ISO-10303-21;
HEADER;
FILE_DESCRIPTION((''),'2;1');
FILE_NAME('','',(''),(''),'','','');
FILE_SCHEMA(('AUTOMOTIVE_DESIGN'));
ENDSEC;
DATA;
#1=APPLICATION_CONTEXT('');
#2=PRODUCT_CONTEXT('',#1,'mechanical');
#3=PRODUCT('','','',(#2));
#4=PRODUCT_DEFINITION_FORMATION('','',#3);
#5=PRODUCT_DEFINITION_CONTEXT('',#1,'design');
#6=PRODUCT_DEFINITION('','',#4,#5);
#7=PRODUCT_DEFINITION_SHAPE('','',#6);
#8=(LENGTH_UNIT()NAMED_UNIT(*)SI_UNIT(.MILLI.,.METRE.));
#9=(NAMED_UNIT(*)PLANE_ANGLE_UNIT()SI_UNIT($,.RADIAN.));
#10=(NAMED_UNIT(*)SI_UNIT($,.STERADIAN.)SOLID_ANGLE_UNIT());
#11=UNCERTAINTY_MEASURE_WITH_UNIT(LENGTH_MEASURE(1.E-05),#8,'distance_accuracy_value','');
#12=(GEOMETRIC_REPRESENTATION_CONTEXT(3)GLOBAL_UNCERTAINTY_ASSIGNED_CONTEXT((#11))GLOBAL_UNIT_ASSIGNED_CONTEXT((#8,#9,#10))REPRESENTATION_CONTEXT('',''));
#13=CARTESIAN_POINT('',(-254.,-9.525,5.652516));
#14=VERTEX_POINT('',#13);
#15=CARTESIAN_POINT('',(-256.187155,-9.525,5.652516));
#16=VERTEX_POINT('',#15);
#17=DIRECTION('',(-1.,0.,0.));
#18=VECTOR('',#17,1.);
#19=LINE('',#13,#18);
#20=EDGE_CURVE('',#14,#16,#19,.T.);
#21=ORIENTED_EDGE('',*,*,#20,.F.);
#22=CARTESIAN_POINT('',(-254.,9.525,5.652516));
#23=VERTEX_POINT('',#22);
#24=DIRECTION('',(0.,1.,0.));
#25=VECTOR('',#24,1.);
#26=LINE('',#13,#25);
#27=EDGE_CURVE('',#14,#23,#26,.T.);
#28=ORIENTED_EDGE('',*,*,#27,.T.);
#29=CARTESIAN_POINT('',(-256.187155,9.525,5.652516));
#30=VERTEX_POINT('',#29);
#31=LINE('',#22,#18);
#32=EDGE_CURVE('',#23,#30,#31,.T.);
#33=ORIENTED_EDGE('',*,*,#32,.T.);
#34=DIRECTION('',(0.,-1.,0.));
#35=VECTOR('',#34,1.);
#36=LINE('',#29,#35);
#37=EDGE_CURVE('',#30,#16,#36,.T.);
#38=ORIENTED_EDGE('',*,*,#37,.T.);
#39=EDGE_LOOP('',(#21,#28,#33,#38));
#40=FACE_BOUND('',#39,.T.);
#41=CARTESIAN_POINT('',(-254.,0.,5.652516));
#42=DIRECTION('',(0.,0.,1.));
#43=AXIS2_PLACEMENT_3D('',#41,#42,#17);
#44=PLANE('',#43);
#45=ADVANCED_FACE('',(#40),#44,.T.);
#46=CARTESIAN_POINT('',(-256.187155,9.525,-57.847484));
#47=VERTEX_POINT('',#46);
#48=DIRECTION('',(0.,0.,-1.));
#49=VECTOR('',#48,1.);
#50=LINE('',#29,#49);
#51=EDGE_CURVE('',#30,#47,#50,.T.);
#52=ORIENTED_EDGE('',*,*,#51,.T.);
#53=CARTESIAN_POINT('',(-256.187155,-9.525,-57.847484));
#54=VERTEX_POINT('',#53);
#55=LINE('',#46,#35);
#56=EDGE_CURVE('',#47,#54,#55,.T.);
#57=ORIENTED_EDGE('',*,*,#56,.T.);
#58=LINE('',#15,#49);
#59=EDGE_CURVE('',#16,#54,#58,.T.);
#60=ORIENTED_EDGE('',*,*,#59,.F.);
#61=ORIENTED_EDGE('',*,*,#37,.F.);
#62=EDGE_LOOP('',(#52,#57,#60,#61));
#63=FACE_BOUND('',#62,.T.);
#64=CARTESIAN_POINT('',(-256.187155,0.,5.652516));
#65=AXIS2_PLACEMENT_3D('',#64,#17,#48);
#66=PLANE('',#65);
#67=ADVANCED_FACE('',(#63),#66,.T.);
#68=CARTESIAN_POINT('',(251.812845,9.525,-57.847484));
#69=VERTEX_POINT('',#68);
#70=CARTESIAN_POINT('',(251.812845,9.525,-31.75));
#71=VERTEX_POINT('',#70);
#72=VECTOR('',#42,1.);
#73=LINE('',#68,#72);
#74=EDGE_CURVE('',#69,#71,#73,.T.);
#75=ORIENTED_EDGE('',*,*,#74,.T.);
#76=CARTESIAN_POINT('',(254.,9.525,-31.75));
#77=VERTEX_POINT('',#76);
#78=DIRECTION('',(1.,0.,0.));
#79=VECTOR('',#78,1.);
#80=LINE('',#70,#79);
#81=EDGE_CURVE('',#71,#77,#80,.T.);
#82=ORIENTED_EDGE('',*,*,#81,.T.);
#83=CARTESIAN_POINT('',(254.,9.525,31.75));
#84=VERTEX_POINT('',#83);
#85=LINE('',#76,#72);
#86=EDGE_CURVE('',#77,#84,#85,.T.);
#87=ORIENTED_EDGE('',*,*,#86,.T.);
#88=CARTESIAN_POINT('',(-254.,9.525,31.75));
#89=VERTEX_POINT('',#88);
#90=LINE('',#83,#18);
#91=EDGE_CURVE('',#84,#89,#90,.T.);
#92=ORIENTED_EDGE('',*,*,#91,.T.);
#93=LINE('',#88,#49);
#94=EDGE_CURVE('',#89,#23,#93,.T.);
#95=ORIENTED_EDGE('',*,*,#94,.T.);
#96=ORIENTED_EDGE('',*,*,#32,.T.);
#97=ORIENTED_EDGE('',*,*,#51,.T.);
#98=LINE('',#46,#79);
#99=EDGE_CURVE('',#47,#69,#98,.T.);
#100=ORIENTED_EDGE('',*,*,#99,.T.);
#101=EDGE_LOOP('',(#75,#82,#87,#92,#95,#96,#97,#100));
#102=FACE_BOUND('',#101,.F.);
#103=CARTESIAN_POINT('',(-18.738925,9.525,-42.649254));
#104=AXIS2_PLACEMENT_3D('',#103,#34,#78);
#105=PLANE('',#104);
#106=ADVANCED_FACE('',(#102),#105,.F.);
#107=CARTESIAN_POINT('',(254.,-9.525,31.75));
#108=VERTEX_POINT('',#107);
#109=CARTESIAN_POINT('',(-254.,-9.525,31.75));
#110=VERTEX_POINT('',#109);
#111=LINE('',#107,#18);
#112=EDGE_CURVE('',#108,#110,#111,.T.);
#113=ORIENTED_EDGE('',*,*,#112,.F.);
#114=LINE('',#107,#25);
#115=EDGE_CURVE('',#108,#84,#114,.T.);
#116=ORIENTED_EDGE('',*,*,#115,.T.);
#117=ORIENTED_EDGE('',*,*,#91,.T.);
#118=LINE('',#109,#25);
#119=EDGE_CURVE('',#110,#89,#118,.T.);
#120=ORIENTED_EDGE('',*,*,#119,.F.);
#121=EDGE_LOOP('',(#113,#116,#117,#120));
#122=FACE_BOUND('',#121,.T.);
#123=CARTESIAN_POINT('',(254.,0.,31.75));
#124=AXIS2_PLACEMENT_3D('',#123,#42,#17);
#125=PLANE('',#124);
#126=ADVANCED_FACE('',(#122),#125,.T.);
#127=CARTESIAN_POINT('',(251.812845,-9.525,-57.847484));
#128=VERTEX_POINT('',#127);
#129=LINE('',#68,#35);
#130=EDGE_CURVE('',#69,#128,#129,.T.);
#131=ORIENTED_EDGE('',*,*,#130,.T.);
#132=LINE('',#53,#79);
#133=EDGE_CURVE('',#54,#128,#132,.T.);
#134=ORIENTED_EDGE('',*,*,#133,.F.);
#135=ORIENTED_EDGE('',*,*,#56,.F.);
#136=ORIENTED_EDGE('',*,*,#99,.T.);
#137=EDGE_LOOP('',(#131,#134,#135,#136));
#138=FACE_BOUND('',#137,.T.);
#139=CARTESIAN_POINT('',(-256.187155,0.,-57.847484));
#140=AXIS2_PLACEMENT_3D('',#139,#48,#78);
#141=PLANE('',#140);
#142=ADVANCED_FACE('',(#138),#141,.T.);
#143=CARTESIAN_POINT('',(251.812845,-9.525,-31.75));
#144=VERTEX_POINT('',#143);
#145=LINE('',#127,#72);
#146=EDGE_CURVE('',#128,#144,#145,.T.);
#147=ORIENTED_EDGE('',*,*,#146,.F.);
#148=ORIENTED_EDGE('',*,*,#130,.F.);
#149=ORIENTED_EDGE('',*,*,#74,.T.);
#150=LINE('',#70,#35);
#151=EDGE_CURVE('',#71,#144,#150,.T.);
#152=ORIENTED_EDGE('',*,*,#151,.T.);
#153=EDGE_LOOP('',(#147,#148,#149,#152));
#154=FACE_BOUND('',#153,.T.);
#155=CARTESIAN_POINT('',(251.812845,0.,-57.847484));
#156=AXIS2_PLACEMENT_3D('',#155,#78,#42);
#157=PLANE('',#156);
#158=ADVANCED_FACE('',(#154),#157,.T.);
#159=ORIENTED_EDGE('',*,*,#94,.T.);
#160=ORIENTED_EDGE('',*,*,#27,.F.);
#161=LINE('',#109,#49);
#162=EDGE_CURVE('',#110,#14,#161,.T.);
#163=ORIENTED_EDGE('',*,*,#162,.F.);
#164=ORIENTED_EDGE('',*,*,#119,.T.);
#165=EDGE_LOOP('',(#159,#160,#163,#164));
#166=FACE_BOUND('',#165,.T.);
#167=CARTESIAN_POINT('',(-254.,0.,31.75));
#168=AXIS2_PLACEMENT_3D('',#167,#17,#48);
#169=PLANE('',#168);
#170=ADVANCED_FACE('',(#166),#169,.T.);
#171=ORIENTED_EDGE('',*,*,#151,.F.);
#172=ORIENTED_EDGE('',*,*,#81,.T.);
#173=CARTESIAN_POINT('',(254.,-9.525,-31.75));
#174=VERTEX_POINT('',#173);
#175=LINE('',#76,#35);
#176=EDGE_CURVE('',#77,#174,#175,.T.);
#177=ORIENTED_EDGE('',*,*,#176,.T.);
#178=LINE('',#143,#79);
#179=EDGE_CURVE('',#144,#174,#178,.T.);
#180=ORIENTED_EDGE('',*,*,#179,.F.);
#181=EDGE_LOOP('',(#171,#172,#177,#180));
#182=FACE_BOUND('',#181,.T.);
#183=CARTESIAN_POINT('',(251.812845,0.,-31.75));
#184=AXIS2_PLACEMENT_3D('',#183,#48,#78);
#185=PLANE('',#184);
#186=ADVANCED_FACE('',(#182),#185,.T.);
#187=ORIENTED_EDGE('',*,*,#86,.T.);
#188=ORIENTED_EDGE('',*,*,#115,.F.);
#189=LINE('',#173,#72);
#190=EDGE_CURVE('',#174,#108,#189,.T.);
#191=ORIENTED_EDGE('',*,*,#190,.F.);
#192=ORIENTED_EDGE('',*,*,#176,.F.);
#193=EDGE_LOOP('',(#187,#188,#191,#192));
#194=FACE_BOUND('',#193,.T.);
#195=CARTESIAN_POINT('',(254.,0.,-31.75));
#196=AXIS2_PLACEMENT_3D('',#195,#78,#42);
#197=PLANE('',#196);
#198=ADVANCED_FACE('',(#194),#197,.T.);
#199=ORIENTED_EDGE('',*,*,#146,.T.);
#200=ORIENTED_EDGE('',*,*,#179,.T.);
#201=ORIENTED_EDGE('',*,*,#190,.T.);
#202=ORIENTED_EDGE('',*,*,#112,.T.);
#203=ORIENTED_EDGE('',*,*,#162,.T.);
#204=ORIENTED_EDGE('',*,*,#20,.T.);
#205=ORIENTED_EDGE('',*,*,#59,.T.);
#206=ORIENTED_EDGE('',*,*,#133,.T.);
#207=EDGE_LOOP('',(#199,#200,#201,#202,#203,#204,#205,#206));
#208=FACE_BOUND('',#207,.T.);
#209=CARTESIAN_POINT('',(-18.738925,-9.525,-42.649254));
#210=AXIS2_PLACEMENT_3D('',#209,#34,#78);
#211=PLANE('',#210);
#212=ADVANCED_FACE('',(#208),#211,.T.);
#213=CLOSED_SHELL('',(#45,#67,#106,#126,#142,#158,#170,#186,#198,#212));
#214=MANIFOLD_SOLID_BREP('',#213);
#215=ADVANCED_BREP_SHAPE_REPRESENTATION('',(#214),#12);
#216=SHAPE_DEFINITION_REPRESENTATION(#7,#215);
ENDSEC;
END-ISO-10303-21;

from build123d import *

# Parameters (mm, degrees)
F0_W     = 505.8128448129
F0_H     = 37.4025163994
F1_DEPTH = 9.525


# Not quite as in the source:
# - the program builds the solid bodies; features that only make, move or delete a surface that nothing else refers to are left out


with BuildPart() as f1:
    # F0 (on Front) → F1 (new body, symmetric)
    with BuildSketch(Plane.XZ):
        Polygon((-254, 5.6525163994), (-256.1871551871, 5.6525163994), (-256.1871551871, -57.8474836006), (251.8128448129, -57.8474836006), (251.8128448129, -31.75), (-254, -31.75), align=None)
        Polygon((-254, 31.75), (-254, 5.6525163994), (251.8128448129, 5.6525163994), (251.8128448129, -31.75), (254, -31.75), (254, 31.75), align=None)
        with Locations((-1.0935775936, -13.0487418003)):
            Rectangle(F0_W, F0_H)
    extrude(amount=F1_DEPTH, both=True)


solid = f1.part
